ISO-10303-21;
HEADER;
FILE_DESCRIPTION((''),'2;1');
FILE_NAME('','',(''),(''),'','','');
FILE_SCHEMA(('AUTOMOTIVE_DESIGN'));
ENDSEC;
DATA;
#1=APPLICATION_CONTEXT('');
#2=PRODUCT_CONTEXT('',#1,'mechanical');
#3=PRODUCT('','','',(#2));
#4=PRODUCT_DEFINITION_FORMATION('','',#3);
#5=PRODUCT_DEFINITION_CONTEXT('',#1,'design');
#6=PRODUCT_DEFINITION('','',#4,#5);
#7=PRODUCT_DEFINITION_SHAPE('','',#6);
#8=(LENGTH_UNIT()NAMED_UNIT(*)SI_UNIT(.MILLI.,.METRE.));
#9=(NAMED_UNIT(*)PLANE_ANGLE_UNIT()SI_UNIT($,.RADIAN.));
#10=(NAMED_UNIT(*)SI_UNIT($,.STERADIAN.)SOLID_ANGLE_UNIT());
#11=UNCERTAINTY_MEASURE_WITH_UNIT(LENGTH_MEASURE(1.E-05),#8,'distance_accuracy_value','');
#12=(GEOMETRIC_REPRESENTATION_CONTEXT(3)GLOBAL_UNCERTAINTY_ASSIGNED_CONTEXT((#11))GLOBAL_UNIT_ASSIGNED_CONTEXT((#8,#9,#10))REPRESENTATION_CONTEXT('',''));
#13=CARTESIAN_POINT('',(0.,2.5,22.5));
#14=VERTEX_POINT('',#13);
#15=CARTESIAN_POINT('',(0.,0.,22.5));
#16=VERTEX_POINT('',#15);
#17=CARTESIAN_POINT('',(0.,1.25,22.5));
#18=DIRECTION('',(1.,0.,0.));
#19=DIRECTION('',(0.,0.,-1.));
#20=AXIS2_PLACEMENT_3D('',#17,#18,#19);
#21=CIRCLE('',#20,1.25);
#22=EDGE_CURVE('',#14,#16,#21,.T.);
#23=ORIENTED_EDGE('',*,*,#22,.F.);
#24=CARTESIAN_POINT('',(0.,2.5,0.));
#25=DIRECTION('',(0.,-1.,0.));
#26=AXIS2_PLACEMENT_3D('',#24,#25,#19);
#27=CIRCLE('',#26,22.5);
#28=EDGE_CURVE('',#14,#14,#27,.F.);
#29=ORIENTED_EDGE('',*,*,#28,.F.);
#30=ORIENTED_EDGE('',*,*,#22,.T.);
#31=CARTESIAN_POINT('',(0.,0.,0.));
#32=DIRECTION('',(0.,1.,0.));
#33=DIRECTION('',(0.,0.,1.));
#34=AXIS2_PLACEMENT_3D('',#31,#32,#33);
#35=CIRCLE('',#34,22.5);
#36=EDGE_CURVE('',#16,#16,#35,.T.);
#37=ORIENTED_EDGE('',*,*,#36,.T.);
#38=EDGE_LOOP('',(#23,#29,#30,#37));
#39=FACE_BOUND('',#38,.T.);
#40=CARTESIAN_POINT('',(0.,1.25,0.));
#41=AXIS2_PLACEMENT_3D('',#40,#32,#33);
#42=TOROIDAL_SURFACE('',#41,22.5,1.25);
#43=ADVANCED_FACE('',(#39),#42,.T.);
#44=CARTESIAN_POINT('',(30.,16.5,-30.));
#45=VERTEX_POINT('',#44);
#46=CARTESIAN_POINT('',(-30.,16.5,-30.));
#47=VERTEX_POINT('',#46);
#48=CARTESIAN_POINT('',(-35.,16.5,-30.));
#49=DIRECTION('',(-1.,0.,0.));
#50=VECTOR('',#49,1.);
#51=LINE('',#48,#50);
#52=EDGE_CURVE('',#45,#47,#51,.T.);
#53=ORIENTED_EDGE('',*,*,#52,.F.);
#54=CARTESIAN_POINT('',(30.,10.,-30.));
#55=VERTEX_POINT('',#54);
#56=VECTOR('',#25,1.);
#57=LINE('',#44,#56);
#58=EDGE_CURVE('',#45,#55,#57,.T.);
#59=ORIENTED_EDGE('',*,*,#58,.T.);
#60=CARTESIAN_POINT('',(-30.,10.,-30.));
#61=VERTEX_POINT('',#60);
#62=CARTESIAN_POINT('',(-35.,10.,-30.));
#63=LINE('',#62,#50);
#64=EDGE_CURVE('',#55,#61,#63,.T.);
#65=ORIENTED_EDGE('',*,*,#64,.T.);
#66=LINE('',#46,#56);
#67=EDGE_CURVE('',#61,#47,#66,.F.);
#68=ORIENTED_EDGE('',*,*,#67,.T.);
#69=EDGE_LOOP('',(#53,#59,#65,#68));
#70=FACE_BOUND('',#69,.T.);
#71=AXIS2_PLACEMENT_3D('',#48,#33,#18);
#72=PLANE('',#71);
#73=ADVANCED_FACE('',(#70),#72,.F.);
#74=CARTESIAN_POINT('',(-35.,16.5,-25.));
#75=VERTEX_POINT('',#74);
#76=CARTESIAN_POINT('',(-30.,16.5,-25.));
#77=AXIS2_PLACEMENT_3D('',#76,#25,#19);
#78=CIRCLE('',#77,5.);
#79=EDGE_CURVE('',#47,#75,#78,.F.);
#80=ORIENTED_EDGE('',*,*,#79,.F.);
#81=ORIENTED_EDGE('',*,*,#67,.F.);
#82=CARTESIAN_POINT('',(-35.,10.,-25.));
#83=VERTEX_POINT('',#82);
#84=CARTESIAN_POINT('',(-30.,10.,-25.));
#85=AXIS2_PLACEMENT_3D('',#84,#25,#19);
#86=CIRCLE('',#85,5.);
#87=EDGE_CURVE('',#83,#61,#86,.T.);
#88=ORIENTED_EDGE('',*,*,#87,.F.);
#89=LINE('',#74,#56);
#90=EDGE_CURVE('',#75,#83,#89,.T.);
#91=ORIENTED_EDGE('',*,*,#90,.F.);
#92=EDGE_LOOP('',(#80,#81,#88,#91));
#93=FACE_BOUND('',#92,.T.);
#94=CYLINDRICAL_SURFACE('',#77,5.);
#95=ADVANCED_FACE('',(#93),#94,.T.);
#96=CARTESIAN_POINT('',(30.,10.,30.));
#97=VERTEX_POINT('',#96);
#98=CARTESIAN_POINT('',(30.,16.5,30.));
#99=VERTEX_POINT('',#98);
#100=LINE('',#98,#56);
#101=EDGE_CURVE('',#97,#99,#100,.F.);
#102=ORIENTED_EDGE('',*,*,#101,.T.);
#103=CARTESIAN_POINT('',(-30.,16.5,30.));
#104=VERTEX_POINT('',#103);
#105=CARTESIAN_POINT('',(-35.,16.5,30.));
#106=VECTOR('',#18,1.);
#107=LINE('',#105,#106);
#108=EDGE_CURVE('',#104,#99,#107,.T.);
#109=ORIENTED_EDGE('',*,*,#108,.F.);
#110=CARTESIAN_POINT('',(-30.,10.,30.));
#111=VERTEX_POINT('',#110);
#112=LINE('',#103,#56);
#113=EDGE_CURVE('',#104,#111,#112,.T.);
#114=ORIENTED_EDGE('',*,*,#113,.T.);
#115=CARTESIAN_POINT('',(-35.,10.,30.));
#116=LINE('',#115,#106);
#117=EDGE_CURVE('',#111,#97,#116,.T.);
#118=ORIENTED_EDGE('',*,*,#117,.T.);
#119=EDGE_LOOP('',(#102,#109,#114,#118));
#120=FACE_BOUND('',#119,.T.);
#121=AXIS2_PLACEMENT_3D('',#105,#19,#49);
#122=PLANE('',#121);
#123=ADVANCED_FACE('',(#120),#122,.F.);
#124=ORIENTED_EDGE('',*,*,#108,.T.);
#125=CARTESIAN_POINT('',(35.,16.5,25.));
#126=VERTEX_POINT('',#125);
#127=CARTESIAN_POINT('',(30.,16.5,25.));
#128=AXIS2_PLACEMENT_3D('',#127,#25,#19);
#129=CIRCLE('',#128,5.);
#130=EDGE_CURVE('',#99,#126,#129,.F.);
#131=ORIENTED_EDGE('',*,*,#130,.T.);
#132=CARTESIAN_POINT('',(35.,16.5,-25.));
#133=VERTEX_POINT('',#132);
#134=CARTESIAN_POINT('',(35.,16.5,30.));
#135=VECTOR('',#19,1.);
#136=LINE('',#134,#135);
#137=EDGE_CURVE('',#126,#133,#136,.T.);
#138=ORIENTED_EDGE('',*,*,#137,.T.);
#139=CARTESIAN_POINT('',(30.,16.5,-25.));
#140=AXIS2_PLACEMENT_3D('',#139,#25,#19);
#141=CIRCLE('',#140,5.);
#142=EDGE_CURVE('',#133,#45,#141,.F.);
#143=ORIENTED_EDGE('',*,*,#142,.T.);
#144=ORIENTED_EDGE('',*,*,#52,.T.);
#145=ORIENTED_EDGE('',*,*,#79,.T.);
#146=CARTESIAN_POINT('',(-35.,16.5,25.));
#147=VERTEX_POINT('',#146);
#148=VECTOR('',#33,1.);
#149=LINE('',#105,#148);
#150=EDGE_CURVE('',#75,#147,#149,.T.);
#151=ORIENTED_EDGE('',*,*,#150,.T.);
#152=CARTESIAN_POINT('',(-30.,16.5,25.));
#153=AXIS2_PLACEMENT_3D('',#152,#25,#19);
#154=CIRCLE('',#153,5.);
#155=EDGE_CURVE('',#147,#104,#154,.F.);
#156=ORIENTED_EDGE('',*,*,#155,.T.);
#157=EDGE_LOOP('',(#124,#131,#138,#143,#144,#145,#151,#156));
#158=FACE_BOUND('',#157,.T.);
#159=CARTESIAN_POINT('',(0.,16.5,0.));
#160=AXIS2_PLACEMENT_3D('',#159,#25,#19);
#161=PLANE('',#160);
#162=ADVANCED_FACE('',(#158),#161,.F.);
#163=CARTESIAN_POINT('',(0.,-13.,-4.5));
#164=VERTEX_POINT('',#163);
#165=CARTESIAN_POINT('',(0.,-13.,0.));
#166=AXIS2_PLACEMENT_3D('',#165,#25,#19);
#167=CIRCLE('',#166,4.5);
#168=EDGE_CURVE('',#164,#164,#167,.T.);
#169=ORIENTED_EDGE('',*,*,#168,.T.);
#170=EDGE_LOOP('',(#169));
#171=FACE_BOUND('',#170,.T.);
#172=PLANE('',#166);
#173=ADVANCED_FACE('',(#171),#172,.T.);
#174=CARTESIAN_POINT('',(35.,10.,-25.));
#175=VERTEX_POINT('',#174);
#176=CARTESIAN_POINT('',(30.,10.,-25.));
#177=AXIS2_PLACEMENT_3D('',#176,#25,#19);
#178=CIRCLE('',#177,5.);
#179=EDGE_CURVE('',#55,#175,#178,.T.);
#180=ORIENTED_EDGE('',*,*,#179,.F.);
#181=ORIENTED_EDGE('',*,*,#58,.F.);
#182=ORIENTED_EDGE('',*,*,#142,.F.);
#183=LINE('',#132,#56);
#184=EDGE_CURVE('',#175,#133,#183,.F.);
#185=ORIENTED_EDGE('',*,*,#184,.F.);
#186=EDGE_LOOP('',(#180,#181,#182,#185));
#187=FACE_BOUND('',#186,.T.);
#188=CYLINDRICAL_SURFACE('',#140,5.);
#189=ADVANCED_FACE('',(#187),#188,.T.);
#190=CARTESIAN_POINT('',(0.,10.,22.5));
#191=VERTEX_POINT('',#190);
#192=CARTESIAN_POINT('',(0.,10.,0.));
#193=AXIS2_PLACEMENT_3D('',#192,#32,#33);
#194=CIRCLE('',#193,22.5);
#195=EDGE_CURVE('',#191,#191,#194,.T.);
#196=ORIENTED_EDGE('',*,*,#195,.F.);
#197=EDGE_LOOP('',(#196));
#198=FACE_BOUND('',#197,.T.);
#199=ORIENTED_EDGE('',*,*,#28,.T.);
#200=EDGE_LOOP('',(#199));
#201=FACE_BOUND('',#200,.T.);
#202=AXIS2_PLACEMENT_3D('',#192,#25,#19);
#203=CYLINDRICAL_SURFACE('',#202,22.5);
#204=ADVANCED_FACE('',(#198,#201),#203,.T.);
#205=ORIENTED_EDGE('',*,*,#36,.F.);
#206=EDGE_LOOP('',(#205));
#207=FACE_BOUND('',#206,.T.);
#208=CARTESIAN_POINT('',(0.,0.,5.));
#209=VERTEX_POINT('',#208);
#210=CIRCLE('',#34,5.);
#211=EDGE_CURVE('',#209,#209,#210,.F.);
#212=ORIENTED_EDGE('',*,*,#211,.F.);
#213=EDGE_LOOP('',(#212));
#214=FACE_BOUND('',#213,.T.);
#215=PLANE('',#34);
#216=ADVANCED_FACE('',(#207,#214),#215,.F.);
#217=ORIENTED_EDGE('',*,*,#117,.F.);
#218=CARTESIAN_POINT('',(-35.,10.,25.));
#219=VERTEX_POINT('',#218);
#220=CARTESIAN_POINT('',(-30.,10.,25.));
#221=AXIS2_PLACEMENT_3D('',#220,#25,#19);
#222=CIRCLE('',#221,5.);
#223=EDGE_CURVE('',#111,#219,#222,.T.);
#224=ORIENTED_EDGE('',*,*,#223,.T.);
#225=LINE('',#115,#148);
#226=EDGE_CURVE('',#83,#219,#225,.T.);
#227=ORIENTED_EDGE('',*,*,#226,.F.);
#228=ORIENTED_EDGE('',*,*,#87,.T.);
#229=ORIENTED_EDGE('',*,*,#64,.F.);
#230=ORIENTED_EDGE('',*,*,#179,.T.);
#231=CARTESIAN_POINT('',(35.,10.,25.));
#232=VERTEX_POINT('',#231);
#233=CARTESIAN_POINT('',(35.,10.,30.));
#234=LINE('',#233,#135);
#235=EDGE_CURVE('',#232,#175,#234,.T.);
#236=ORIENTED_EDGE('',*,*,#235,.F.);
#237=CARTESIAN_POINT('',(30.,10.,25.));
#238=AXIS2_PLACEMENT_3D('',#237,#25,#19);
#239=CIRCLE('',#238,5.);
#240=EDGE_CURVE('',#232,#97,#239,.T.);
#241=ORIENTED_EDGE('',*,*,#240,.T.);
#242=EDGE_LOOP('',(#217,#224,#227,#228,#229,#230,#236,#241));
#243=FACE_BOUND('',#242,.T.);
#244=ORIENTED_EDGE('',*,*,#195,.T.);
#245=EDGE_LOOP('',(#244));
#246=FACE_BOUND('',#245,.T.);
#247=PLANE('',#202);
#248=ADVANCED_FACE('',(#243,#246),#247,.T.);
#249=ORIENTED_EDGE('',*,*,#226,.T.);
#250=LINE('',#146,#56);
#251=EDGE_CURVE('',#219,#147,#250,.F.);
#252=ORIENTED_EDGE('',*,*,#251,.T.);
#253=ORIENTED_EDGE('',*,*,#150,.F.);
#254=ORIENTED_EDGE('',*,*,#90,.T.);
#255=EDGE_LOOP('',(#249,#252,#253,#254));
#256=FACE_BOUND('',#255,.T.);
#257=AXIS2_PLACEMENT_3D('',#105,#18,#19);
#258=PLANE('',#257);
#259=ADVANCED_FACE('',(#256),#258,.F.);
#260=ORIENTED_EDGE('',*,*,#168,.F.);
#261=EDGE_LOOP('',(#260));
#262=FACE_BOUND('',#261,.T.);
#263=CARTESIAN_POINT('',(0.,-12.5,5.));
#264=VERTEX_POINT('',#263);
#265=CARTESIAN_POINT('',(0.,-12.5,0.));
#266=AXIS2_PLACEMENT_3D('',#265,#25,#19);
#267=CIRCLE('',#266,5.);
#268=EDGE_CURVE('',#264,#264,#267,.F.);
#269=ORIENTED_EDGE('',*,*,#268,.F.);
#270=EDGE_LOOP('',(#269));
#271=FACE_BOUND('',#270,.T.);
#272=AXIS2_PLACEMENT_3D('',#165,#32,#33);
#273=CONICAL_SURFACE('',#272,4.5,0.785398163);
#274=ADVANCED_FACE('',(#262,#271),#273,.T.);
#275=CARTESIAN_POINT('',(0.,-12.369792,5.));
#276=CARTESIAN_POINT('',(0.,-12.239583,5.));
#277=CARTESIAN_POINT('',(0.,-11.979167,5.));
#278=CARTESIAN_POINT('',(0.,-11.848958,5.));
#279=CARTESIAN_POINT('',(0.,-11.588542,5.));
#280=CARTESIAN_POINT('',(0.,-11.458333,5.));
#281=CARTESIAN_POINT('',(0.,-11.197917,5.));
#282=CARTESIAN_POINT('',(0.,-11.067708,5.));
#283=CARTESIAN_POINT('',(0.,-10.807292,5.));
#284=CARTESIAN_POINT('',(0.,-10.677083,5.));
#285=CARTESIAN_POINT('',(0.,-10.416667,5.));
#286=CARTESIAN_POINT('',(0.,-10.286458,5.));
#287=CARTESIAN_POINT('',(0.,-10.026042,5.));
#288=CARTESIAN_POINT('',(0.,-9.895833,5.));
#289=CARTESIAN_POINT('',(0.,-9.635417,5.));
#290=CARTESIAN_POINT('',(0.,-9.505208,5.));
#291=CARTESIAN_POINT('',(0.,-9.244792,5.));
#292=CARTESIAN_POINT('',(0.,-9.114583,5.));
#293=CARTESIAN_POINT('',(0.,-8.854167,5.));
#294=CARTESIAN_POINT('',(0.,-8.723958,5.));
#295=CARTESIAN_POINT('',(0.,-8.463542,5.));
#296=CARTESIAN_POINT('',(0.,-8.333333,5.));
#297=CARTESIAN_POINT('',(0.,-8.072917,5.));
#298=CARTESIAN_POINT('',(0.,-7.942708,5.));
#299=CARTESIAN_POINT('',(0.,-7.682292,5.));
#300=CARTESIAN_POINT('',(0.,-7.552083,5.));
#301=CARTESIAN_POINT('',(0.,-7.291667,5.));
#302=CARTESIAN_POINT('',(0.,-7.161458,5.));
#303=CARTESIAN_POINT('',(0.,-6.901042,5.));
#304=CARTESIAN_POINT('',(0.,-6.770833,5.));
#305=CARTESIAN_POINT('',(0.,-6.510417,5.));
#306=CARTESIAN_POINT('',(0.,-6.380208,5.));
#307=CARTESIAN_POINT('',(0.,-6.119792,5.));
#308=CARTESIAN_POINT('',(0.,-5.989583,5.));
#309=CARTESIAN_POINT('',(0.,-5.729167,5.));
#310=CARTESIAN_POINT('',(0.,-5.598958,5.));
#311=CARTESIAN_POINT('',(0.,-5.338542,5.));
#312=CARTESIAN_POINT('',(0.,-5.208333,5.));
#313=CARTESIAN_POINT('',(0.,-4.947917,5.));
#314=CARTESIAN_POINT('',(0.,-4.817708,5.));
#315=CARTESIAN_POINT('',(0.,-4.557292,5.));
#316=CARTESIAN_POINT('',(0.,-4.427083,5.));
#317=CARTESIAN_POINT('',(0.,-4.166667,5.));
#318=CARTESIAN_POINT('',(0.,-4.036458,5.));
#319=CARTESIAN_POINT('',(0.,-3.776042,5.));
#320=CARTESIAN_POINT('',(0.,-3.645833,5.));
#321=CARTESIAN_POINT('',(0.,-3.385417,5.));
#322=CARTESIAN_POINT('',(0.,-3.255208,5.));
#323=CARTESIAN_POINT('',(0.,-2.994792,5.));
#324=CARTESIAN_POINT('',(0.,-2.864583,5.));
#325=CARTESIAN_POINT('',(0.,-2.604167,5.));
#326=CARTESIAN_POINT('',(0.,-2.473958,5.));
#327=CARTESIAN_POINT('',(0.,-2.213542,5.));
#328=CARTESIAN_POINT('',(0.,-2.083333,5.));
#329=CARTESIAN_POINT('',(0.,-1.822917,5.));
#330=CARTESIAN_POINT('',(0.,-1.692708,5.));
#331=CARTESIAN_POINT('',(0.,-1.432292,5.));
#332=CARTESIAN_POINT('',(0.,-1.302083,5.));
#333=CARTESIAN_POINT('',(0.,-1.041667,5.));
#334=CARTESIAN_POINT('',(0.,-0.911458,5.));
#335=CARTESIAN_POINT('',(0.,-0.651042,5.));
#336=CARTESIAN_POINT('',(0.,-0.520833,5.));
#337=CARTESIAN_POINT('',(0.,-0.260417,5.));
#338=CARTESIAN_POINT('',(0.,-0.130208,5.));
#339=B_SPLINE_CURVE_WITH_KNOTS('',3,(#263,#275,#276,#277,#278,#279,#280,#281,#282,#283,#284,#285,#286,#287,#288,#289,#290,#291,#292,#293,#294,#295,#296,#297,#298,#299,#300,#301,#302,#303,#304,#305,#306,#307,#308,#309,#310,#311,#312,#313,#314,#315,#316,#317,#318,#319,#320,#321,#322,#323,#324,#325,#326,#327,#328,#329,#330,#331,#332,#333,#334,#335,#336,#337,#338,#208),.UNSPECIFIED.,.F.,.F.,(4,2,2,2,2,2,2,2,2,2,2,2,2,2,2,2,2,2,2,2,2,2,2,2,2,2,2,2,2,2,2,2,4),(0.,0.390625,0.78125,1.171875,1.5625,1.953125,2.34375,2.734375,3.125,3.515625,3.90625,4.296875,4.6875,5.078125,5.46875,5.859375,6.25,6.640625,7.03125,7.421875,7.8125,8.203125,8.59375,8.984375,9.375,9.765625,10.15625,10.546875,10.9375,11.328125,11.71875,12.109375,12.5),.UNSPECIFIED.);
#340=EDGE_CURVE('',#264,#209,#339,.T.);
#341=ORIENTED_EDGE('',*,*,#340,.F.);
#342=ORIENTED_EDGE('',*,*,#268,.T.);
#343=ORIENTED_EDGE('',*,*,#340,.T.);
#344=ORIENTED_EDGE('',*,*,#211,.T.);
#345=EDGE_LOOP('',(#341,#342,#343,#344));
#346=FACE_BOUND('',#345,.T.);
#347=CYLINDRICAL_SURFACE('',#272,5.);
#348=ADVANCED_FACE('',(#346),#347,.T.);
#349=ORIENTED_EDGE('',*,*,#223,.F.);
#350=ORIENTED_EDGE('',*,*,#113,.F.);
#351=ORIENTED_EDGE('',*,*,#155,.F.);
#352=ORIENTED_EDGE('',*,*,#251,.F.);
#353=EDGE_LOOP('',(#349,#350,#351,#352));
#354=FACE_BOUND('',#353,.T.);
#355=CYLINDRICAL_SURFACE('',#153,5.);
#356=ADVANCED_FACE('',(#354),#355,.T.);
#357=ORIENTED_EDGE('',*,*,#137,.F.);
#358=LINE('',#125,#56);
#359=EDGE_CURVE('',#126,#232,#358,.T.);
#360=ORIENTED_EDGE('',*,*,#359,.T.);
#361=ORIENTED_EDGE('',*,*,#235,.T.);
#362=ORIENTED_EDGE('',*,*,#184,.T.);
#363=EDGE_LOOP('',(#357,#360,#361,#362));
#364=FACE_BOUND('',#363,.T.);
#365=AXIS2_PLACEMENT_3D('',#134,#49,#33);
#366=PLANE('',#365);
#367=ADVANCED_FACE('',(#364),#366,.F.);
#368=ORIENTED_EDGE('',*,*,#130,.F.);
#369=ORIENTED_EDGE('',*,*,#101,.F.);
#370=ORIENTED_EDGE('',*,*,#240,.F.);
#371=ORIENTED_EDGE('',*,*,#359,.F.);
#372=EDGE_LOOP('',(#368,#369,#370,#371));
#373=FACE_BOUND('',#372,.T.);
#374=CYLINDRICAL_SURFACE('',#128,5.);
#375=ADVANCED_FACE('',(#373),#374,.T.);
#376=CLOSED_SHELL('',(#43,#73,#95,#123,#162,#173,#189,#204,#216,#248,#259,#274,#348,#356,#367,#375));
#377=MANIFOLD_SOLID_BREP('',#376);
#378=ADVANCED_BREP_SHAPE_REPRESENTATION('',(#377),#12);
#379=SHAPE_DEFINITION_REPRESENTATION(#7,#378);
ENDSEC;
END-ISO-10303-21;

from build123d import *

# Parameters (mm, degrees)
ESBO_O1_R                = 22.5
RESSALTO_EXTRUS_O1_DEPTH = 10
ESBO_O3_W                = 70
ESBO_O3_H                = 60
RESSALTO_EXTRUS_O2_DEPTH = 6.5
ESBO_O5_R                = 5
RESSALTO_EXTRUS_O3_DEPTH = 13
CHANFRO1_SIZE            = 0.5
FILETE1_R                = 5


# Read off the part's stored shape, not the designer's step: Varredura1
with BuildPart() as part:
    # Esboço1 → Ressalto-extrusão1 (new body)
    with BuildSketch(Plane(origin=(0, 0, 0), x_dir=(1, 0, 0), z_dir=(0, 1, 0))):
        with Locations(Location((0, 0, 0), (0, 0, 270))):
            Circle(ESBO_O1_R)
    extrude(amount=RESSALTO_EXTRUS_O1_DEPTH)

    # Esboço3 → Ressalto-extrusão2 (add)
    with BuildSketch(Plane(origin=(0, 10, 0), x_dir=(1, 0, 0), z_dir=(0, 1, 0))):
        Rectangle(ESBO_O3_W, ESBO_O3_H)
    extrude(amount=RESSALTO_EXTRUS_O2_DEPTH)

    # Varredura1 outline → Varredura1 (revolve)
    with BuildSketch(Plane.XY):
        with BuildLine():
            Line((22.5, 2.5), (22.5, 0))
            ThreePointArc((22.5, 0), (23.75, 1.25), (22.5, 2.5))
        make_face()
    revolve(axis=Axis((0, 0, 0), (0, 1, 0)))

    # Esboço5 → Ressalto-extrusão3 (add)
    with BuildSketch(Plane.XZ):
        with Locations(Location((0, 0, 0), (0, 0, 90))):
            Circle(ESBO_O5_R)
    extrude(amount=RESSALTO_EXTRUS_O3_DEPTH)

    # Chanfro1
    chanfro1_edges = [part.edges().sort_by_distance(p)[0] for p in [
        (0, -13, -5),
    ]]
    chamfer(chanfro1_edges, length=CHANFRO1_SIZE)

    # Filete1
    filete1_edges = [part.edges().sort_by_distance(p)[0] for p in [
        (35, 13.25, 30),
        (35, 13.25, -30),
        (-35, 13.25, -30),
        (-35, 13.25, 30),
    ]]
    fillet(filete1_edges, radius=FILETE1_R)


solid = part.part
